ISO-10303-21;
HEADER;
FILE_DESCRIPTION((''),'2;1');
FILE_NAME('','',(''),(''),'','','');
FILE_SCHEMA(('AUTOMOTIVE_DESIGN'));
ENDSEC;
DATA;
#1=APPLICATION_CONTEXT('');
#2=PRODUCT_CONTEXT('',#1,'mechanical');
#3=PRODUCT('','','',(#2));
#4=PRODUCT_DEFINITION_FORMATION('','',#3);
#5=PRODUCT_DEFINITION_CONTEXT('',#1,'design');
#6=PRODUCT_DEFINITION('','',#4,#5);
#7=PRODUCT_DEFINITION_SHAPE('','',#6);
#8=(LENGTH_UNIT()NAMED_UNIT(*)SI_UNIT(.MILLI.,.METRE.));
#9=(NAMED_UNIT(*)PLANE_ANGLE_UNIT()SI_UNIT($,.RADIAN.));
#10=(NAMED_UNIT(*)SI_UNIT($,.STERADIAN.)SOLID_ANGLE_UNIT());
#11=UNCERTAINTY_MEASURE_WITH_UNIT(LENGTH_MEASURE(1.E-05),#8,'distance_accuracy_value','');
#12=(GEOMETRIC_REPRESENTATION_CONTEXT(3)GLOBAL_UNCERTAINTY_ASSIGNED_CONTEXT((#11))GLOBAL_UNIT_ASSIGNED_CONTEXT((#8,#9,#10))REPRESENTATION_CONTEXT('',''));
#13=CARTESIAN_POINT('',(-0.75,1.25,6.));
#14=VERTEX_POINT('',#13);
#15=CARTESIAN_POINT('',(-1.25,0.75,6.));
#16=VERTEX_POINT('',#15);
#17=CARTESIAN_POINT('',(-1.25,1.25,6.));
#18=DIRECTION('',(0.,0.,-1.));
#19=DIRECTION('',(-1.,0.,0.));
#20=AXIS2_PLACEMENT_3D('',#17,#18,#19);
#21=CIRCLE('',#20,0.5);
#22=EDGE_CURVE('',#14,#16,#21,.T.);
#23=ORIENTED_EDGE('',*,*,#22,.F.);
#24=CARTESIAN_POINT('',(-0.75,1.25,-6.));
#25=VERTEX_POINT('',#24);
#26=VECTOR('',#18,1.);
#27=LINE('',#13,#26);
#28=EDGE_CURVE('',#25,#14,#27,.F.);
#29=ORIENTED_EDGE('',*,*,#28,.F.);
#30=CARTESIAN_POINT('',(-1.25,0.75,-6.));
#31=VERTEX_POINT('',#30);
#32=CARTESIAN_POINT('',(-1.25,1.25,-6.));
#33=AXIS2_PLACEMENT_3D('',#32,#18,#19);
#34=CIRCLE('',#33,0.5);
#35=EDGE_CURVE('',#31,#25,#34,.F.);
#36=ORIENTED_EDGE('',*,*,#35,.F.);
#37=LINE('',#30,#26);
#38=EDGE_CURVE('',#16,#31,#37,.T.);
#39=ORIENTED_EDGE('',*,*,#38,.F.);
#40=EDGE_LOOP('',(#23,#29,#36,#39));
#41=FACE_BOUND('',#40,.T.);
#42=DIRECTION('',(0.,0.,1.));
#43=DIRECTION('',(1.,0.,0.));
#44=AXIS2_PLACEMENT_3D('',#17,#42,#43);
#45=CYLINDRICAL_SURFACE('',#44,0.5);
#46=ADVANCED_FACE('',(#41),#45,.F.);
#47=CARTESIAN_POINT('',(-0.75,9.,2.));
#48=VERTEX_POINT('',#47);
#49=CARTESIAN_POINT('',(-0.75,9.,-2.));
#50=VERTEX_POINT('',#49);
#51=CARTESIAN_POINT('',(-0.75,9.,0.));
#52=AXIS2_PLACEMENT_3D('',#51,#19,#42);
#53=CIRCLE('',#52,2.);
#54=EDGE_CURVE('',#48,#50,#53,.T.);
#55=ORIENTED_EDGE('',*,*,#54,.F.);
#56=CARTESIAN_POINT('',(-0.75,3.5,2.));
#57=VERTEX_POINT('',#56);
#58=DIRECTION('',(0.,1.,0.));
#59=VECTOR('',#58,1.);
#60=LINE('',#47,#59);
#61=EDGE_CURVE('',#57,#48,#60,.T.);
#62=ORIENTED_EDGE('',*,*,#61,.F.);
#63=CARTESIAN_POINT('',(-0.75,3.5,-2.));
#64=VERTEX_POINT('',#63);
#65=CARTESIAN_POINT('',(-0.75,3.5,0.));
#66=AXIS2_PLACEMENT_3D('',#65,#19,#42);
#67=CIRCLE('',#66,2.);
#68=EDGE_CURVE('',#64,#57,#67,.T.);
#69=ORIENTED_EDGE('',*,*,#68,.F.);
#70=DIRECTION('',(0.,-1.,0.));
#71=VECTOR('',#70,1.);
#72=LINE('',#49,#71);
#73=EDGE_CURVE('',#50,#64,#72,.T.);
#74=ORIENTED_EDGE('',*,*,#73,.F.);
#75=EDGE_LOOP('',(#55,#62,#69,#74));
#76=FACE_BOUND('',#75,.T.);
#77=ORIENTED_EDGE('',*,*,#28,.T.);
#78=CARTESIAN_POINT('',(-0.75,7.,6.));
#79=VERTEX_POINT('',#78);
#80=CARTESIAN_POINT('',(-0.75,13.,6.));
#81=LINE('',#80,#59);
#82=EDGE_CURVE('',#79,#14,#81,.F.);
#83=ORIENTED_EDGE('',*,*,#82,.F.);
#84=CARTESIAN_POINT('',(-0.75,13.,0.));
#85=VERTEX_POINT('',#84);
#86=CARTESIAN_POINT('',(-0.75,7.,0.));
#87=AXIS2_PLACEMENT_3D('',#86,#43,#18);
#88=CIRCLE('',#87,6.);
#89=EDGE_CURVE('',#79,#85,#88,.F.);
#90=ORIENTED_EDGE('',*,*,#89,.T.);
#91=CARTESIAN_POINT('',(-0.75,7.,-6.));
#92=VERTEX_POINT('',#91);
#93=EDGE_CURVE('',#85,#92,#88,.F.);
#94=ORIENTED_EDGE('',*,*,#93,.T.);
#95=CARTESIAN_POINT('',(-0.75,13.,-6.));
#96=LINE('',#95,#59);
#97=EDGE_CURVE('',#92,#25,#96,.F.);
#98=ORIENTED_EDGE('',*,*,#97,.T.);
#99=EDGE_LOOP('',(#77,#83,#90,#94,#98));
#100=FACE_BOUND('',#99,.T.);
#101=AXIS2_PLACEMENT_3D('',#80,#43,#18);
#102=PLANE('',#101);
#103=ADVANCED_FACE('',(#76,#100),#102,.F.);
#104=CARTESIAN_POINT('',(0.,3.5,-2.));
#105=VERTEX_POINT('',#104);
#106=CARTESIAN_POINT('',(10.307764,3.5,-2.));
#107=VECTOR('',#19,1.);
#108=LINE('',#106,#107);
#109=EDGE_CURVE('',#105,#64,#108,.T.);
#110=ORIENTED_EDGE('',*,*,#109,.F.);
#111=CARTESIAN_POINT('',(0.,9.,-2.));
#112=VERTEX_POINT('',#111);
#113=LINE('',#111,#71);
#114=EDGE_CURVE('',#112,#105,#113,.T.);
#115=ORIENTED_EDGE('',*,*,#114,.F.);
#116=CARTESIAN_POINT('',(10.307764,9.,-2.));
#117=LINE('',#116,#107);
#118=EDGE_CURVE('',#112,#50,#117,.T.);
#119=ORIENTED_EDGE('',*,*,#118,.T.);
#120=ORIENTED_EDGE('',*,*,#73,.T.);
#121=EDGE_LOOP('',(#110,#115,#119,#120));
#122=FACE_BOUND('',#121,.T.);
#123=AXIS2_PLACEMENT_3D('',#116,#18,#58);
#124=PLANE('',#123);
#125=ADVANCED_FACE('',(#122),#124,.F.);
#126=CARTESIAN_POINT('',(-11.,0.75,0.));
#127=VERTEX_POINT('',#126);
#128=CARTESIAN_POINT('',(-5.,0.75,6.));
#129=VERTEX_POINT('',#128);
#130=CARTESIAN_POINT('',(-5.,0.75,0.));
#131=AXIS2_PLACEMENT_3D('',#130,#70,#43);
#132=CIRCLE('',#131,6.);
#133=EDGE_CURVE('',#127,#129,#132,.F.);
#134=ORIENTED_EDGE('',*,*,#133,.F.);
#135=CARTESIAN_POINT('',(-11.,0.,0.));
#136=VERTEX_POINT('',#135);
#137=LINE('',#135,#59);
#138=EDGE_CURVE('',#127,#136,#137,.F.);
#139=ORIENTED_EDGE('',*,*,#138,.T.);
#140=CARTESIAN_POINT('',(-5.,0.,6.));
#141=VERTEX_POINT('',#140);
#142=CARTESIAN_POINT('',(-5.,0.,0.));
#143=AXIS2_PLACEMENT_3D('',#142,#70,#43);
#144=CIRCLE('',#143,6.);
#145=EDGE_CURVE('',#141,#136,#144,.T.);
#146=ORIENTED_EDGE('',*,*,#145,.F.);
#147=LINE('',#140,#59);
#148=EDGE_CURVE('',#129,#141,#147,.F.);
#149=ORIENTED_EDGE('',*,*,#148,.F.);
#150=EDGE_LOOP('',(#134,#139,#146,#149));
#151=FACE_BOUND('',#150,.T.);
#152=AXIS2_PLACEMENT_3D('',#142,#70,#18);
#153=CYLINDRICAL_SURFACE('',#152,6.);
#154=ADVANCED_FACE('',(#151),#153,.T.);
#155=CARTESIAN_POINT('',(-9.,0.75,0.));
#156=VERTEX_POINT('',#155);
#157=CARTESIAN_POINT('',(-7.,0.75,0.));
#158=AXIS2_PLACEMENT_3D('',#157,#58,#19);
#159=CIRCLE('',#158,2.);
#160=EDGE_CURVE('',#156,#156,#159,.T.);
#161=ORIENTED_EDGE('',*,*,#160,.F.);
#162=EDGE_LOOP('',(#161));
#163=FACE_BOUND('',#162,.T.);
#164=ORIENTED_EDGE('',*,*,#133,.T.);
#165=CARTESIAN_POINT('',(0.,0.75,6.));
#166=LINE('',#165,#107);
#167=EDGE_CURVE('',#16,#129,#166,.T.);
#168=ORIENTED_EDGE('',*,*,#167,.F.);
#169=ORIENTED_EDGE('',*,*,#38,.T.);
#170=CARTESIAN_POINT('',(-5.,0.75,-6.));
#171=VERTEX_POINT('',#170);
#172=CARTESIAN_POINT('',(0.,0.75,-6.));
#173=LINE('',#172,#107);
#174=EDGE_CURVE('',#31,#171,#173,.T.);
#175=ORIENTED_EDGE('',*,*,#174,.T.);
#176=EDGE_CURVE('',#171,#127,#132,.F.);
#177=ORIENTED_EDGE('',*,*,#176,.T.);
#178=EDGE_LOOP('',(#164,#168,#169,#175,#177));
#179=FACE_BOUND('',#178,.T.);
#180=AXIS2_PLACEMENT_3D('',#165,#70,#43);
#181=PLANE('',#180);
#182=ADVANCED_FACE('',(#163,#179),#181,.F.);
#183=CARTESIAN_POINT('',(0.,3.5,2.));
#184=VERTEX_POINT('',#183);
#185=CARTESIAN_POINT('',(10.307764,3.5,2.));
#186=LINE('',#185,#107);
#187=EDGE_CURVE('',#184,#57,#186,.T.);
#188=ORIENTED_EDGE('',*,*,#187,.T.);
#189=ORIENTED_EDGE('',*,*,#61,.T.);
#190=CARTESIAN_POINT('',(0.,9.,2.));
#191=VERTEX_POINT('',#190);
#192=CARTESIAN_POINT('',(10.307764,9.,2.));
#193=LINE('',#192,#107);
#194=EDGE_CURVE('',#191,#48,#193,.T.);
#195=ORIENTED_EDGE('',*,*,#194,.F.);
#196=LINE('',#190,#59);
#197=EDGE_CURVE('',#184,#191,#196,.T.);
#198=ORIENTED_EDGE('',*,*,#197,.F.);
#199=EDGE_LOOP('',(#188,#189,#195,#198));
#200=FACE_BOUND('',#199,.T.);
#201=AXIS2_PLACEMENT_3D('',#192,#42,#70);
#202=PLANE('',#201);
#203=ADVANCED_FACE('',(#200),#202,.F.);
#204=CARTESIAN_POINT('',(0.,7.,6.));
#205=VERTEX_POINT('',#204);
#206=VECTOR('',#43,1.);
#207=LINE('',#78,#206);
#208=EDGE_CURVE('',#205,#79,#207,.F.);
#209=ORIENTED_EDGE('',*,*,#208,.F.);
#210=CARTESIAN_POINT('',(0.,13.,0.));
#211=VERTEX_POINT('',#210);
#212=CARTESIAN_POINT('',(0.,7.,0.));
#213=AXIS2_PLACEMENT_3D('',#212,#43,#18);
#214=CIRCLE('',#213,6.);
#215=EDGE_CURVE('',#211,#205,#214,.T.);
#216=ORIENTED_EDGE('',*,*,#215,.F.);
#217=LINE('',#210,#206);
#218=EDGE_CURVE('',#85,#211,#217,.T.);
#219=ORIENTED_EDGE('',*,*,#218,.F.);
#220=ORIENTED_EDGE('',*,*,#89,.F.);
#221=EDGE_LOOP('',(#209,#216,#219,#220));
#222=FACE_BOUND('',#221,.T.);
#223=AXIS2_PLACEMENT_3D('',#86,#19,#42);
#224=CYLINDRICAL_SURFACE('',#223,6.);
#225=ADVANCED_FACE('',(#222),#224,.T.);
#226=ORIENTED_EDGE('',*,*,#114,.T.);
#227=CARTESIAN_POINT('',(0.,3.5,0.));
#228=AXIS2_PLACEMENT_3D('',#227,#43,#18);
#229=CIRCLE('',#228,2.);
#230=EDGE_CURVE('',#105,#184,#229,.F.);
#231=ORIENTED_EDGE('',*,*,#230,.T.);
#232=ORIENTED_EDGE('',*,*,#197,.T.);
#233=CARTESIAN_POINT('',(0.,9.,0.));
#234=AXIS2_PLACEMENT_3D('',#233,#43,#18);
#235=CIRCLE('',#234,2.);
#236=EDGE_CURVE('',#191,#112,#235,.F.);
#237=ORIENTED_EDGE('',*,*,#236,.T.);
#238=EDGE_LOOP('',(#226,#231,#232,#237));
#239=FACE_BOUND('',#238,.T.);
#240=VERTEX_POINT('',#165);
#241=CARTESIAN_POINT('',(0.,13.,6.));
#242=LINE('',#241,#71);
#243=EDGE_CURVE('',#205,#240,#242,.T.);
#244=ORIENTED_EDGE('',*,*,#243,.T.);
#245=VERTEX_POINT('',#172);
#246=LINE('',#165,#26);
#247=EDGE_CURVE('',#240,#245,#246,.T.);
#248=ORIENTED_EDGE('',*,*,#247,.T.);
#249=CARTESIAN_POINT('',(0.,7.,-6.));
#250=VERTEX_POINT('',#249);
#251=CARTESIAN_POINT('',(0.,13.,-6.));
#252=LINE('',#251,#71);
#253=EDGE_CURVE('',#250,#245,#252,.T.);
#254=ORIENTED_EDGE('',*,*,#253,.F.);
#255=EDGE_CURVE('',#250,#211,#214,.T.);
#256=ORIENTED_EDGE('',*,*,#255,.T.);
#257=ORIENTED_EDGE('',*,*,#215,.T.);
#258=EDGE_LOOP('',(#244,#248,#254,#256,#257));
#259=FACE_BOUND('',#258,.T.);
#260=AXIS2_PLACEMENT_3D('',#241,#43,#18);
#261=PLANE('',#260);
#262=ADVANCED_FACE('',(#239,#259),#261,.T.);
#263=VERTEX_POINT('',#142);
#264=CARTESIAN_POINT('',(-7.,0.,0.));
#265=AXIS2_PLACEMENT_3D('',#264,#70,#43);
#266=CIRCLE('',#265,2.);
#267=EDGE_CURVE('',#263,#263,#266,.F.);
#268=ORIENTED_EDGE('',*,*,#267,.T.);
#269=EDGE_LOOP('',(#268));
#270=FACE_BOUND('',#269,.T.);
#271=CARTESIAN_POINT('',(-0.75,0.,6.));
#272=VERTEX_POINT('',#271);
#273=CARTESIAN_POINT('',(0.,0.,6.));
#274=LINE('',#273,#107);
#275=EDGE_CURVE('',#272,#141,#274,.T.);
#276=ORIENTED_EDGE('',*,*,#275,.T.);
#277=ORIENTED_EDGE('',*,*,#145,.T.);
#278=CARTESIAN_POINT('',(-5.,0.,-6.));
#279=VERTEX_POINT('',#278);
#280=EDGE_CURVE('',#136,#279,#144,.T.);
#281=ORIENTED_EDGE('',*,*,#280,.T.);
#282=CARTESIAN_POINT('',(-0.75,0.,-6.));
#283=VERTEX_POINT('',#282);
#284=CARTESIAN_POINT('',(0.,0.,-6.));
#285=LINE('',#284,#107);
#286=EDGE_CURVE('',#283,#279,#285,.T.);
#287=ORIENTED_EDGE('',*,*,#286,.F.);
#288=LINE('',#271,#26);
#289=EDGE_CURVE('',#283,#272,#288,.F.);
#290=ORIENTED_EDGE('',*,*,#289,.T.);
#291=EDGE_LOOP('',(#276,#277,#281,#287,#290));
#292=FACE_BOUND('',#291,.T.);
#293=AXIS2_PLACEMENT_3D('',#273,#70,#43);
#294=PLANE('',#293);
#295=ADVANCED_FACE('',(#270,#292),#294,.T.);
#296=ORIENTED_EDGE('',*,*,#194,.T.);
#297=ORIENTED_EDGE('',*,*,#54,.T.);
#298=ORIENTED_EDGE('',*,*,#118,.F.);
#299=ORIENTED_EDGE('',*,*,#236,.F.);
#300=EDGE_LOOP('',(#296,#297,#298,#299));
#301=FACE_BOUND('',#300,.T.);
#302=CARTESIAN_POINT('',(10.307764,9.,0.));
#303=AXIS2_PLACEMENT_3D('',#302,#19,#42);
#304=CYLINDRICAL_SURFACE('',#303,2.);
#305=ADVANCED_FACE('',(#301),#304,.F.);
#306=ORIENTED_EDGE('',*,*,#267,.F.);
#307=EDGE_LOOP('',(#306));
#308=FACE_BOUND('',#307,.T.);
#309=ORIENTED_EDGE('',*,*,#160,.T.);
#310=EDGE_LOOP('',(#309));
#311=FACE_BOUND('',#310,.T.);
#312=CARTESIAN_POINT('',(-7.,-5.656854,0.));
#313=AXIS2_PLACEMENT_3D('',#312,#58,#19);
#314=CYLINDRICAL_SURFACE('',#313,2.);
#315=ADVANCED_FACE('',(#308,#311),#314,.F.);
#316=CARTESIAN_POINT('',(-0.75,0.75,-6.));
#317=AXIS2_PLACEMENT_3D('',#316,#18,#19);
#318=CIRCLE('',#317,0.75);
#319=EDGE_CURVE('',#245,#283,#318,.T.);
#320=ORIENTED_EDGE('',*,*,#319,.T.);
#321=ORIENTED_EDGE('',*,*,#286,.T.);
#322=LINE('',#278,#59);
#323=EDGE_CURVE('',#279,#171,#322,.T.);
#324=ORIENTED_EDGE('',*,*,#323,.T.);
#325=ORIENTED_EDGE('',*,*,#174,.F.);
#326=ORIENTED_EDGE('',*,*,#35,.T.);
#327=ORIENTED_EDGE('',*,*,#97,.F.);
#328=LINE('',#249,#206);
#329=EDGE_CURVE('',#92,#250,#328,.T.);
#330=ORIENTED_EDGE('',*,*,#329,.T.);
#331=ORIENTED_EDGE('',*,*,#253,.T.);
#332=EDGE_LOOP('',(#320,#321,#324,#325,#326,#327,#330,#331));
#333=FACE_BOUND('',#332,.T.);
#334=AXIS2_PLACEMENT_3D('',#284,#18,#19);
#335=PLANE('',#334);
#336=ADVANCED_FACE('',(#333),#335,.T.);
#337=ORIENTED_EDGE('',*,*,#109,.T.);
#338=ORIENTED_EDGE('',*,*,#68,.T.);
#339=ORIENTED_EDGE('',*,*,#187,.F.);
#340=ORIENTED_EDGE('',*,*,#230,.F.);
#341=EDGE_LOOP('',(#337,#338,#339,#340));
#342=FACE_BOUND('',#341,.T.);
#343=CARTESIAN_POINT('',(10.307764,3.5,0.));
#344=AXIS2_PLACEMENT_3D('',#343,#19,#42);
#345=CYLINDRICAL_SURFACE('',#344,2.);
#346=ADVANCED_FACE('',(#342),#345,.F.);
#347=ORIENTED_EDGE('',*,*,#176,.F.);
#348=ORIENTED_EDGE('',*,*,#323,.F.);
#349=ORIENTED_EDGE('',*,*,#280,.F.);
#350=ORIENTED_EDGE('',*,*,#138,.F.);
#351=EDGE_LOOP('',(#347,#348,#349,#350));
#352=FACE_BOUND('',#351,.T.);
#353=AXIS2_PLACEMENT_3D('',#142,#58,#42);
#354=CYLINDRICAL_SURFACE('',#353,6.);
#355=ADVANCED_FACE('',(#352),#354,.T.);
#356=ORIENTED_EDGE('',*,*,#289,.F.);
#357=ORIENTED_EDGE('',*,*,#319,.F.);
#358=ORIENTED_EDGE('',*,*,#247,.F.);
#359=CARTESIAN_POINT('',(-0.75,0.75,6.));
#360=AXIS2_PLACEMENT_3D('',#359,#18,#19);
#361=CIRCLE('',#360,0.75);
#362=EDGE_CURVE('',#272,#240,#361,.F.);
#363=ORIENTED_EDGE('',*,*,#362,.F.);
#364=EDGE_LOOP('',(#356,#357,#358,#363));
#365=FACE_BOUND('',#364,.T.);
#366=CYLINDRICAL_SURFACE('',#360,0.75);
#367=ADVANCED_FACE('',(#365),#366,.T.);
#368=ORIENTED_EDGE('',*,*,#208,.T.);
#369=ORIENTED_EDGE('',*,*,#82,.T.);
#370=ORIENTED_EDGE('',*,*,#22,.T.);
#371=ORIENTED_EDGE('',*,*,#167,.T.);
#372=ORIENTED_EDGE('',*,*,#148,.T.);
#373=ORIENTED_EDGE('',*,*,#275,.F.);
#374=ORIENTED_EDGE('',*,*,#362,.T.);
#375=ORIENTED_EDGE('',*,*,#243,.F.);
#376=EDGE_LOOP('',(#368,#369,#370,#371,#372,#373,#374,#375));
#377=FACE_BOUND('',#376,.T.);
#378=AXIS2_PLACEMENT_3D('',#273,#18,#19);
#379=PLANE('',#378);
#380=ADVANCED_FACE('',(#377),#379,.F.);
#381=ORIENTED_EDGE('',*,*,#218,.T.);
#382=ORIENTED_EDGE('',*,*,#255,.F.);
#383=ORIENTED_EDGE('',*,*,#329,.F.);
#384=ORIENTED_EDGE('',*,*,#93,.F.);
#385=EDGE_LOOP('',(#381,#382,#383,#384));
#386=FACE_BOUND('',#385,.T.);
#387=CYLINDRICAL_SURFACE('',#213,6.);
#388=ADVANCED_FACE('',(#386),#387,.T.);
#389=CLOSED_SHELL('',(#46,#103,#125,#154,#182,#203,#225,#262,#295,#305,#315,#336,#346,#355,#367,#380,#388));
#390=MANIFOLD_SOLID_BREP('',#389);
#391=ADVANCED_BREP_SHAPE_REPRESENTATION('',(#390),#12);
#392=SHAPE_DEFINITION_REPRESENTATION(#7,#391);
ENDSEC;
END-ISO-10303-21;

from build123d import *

# Parameters (mm, degrees)
ESTRUSIONE_SOTTILE1_DEPTH = 6
RACCORDO3_R               = 6
SCHIZZO4_R                = 2
TAGLIO_ESTRUSIONE1_DEPTH  = 0.75
RACCORDO1_R               = 0.75
RACCORDO2_R               = 0.5
TAGLIO_ESTRUSIONE2_DEPTH  = 0.75


with BuildPart() as part:
    # Schizzo1 → Estrusione-Sottile1 (new, symmetric)
    with BuildSketch(Plane.XY):
        Polygon((0, 13), (0, 0), (-11, 0), (-11, 0.75), (-0.75, 0.75), (-0.75, 13), align=None)
    extrude(amount=ESTRUSIONE_SOTTILE1_DEPTH, both=True)

    # Raccordo3
    raccordo3_edges = [part.edges().sort_by_distance(p)[0] for p in [
        (-11, 0.375, 6),
        (-11, 0.375, -6),
        (-0.375, 13, -6),
        (-0.375, 13, 6),
    ]]
    fillet(raccordo3_edges, radius=RACCORDO3_R - 0.0001)  # a hair under: the kernel refuses the full size

    # Schizzo4 → Taglio-Estrusione1 (cut)
    with BuildSketch(Plane(origin=(0, 0.75, 0), x_dir=(1, 0, 0), z_dir=(0, 1, 0))):
        with Locations(Location((-7, 0, 0), (0, 0, 180))):
            Circle(SCHIZZO4_R)
    extrude(amount=-TAGLIO_ESTRUSIONE1_DEPTH, mode=Mode.SUBTRACT)

    # Raccordo1
    raccordo1_edges = [part.edges().sort_by_distance(p)[0] for p in [
        (0, 0, 0),
    ]]
    fillet(raccordo1_edges, radius=RACCORDO1_R)

    # Raccordo2
    raccordo2_edges = [part.edges().sort_by_distance(p)[0] for p in [
        (-0.75, 0.75, 0),
    ]]
    fillet(raccordo2_edges, radius=RACCORDO2_R)

    # Schizzo5 → Taglio-Estrusione2 (cut)
    with BuildSketch(Plane.ZY.offset(0.75)):
        with BuildLine():
            Line((2, 9), (2, 3.5))
            ThreePointArc((2, 3.5), (0, 1.5), (-2, 3.5))
            Line((-2, 3.5), (-2, 9))
            ThreePointArc((-2, 9), (0, 11), (2, 9))
        make_face()
    extrude(amount=-TAGLIO_ESTRUSIONE2_DEPTH, mode=Mode.SUBTRACT)


solid = part.part
